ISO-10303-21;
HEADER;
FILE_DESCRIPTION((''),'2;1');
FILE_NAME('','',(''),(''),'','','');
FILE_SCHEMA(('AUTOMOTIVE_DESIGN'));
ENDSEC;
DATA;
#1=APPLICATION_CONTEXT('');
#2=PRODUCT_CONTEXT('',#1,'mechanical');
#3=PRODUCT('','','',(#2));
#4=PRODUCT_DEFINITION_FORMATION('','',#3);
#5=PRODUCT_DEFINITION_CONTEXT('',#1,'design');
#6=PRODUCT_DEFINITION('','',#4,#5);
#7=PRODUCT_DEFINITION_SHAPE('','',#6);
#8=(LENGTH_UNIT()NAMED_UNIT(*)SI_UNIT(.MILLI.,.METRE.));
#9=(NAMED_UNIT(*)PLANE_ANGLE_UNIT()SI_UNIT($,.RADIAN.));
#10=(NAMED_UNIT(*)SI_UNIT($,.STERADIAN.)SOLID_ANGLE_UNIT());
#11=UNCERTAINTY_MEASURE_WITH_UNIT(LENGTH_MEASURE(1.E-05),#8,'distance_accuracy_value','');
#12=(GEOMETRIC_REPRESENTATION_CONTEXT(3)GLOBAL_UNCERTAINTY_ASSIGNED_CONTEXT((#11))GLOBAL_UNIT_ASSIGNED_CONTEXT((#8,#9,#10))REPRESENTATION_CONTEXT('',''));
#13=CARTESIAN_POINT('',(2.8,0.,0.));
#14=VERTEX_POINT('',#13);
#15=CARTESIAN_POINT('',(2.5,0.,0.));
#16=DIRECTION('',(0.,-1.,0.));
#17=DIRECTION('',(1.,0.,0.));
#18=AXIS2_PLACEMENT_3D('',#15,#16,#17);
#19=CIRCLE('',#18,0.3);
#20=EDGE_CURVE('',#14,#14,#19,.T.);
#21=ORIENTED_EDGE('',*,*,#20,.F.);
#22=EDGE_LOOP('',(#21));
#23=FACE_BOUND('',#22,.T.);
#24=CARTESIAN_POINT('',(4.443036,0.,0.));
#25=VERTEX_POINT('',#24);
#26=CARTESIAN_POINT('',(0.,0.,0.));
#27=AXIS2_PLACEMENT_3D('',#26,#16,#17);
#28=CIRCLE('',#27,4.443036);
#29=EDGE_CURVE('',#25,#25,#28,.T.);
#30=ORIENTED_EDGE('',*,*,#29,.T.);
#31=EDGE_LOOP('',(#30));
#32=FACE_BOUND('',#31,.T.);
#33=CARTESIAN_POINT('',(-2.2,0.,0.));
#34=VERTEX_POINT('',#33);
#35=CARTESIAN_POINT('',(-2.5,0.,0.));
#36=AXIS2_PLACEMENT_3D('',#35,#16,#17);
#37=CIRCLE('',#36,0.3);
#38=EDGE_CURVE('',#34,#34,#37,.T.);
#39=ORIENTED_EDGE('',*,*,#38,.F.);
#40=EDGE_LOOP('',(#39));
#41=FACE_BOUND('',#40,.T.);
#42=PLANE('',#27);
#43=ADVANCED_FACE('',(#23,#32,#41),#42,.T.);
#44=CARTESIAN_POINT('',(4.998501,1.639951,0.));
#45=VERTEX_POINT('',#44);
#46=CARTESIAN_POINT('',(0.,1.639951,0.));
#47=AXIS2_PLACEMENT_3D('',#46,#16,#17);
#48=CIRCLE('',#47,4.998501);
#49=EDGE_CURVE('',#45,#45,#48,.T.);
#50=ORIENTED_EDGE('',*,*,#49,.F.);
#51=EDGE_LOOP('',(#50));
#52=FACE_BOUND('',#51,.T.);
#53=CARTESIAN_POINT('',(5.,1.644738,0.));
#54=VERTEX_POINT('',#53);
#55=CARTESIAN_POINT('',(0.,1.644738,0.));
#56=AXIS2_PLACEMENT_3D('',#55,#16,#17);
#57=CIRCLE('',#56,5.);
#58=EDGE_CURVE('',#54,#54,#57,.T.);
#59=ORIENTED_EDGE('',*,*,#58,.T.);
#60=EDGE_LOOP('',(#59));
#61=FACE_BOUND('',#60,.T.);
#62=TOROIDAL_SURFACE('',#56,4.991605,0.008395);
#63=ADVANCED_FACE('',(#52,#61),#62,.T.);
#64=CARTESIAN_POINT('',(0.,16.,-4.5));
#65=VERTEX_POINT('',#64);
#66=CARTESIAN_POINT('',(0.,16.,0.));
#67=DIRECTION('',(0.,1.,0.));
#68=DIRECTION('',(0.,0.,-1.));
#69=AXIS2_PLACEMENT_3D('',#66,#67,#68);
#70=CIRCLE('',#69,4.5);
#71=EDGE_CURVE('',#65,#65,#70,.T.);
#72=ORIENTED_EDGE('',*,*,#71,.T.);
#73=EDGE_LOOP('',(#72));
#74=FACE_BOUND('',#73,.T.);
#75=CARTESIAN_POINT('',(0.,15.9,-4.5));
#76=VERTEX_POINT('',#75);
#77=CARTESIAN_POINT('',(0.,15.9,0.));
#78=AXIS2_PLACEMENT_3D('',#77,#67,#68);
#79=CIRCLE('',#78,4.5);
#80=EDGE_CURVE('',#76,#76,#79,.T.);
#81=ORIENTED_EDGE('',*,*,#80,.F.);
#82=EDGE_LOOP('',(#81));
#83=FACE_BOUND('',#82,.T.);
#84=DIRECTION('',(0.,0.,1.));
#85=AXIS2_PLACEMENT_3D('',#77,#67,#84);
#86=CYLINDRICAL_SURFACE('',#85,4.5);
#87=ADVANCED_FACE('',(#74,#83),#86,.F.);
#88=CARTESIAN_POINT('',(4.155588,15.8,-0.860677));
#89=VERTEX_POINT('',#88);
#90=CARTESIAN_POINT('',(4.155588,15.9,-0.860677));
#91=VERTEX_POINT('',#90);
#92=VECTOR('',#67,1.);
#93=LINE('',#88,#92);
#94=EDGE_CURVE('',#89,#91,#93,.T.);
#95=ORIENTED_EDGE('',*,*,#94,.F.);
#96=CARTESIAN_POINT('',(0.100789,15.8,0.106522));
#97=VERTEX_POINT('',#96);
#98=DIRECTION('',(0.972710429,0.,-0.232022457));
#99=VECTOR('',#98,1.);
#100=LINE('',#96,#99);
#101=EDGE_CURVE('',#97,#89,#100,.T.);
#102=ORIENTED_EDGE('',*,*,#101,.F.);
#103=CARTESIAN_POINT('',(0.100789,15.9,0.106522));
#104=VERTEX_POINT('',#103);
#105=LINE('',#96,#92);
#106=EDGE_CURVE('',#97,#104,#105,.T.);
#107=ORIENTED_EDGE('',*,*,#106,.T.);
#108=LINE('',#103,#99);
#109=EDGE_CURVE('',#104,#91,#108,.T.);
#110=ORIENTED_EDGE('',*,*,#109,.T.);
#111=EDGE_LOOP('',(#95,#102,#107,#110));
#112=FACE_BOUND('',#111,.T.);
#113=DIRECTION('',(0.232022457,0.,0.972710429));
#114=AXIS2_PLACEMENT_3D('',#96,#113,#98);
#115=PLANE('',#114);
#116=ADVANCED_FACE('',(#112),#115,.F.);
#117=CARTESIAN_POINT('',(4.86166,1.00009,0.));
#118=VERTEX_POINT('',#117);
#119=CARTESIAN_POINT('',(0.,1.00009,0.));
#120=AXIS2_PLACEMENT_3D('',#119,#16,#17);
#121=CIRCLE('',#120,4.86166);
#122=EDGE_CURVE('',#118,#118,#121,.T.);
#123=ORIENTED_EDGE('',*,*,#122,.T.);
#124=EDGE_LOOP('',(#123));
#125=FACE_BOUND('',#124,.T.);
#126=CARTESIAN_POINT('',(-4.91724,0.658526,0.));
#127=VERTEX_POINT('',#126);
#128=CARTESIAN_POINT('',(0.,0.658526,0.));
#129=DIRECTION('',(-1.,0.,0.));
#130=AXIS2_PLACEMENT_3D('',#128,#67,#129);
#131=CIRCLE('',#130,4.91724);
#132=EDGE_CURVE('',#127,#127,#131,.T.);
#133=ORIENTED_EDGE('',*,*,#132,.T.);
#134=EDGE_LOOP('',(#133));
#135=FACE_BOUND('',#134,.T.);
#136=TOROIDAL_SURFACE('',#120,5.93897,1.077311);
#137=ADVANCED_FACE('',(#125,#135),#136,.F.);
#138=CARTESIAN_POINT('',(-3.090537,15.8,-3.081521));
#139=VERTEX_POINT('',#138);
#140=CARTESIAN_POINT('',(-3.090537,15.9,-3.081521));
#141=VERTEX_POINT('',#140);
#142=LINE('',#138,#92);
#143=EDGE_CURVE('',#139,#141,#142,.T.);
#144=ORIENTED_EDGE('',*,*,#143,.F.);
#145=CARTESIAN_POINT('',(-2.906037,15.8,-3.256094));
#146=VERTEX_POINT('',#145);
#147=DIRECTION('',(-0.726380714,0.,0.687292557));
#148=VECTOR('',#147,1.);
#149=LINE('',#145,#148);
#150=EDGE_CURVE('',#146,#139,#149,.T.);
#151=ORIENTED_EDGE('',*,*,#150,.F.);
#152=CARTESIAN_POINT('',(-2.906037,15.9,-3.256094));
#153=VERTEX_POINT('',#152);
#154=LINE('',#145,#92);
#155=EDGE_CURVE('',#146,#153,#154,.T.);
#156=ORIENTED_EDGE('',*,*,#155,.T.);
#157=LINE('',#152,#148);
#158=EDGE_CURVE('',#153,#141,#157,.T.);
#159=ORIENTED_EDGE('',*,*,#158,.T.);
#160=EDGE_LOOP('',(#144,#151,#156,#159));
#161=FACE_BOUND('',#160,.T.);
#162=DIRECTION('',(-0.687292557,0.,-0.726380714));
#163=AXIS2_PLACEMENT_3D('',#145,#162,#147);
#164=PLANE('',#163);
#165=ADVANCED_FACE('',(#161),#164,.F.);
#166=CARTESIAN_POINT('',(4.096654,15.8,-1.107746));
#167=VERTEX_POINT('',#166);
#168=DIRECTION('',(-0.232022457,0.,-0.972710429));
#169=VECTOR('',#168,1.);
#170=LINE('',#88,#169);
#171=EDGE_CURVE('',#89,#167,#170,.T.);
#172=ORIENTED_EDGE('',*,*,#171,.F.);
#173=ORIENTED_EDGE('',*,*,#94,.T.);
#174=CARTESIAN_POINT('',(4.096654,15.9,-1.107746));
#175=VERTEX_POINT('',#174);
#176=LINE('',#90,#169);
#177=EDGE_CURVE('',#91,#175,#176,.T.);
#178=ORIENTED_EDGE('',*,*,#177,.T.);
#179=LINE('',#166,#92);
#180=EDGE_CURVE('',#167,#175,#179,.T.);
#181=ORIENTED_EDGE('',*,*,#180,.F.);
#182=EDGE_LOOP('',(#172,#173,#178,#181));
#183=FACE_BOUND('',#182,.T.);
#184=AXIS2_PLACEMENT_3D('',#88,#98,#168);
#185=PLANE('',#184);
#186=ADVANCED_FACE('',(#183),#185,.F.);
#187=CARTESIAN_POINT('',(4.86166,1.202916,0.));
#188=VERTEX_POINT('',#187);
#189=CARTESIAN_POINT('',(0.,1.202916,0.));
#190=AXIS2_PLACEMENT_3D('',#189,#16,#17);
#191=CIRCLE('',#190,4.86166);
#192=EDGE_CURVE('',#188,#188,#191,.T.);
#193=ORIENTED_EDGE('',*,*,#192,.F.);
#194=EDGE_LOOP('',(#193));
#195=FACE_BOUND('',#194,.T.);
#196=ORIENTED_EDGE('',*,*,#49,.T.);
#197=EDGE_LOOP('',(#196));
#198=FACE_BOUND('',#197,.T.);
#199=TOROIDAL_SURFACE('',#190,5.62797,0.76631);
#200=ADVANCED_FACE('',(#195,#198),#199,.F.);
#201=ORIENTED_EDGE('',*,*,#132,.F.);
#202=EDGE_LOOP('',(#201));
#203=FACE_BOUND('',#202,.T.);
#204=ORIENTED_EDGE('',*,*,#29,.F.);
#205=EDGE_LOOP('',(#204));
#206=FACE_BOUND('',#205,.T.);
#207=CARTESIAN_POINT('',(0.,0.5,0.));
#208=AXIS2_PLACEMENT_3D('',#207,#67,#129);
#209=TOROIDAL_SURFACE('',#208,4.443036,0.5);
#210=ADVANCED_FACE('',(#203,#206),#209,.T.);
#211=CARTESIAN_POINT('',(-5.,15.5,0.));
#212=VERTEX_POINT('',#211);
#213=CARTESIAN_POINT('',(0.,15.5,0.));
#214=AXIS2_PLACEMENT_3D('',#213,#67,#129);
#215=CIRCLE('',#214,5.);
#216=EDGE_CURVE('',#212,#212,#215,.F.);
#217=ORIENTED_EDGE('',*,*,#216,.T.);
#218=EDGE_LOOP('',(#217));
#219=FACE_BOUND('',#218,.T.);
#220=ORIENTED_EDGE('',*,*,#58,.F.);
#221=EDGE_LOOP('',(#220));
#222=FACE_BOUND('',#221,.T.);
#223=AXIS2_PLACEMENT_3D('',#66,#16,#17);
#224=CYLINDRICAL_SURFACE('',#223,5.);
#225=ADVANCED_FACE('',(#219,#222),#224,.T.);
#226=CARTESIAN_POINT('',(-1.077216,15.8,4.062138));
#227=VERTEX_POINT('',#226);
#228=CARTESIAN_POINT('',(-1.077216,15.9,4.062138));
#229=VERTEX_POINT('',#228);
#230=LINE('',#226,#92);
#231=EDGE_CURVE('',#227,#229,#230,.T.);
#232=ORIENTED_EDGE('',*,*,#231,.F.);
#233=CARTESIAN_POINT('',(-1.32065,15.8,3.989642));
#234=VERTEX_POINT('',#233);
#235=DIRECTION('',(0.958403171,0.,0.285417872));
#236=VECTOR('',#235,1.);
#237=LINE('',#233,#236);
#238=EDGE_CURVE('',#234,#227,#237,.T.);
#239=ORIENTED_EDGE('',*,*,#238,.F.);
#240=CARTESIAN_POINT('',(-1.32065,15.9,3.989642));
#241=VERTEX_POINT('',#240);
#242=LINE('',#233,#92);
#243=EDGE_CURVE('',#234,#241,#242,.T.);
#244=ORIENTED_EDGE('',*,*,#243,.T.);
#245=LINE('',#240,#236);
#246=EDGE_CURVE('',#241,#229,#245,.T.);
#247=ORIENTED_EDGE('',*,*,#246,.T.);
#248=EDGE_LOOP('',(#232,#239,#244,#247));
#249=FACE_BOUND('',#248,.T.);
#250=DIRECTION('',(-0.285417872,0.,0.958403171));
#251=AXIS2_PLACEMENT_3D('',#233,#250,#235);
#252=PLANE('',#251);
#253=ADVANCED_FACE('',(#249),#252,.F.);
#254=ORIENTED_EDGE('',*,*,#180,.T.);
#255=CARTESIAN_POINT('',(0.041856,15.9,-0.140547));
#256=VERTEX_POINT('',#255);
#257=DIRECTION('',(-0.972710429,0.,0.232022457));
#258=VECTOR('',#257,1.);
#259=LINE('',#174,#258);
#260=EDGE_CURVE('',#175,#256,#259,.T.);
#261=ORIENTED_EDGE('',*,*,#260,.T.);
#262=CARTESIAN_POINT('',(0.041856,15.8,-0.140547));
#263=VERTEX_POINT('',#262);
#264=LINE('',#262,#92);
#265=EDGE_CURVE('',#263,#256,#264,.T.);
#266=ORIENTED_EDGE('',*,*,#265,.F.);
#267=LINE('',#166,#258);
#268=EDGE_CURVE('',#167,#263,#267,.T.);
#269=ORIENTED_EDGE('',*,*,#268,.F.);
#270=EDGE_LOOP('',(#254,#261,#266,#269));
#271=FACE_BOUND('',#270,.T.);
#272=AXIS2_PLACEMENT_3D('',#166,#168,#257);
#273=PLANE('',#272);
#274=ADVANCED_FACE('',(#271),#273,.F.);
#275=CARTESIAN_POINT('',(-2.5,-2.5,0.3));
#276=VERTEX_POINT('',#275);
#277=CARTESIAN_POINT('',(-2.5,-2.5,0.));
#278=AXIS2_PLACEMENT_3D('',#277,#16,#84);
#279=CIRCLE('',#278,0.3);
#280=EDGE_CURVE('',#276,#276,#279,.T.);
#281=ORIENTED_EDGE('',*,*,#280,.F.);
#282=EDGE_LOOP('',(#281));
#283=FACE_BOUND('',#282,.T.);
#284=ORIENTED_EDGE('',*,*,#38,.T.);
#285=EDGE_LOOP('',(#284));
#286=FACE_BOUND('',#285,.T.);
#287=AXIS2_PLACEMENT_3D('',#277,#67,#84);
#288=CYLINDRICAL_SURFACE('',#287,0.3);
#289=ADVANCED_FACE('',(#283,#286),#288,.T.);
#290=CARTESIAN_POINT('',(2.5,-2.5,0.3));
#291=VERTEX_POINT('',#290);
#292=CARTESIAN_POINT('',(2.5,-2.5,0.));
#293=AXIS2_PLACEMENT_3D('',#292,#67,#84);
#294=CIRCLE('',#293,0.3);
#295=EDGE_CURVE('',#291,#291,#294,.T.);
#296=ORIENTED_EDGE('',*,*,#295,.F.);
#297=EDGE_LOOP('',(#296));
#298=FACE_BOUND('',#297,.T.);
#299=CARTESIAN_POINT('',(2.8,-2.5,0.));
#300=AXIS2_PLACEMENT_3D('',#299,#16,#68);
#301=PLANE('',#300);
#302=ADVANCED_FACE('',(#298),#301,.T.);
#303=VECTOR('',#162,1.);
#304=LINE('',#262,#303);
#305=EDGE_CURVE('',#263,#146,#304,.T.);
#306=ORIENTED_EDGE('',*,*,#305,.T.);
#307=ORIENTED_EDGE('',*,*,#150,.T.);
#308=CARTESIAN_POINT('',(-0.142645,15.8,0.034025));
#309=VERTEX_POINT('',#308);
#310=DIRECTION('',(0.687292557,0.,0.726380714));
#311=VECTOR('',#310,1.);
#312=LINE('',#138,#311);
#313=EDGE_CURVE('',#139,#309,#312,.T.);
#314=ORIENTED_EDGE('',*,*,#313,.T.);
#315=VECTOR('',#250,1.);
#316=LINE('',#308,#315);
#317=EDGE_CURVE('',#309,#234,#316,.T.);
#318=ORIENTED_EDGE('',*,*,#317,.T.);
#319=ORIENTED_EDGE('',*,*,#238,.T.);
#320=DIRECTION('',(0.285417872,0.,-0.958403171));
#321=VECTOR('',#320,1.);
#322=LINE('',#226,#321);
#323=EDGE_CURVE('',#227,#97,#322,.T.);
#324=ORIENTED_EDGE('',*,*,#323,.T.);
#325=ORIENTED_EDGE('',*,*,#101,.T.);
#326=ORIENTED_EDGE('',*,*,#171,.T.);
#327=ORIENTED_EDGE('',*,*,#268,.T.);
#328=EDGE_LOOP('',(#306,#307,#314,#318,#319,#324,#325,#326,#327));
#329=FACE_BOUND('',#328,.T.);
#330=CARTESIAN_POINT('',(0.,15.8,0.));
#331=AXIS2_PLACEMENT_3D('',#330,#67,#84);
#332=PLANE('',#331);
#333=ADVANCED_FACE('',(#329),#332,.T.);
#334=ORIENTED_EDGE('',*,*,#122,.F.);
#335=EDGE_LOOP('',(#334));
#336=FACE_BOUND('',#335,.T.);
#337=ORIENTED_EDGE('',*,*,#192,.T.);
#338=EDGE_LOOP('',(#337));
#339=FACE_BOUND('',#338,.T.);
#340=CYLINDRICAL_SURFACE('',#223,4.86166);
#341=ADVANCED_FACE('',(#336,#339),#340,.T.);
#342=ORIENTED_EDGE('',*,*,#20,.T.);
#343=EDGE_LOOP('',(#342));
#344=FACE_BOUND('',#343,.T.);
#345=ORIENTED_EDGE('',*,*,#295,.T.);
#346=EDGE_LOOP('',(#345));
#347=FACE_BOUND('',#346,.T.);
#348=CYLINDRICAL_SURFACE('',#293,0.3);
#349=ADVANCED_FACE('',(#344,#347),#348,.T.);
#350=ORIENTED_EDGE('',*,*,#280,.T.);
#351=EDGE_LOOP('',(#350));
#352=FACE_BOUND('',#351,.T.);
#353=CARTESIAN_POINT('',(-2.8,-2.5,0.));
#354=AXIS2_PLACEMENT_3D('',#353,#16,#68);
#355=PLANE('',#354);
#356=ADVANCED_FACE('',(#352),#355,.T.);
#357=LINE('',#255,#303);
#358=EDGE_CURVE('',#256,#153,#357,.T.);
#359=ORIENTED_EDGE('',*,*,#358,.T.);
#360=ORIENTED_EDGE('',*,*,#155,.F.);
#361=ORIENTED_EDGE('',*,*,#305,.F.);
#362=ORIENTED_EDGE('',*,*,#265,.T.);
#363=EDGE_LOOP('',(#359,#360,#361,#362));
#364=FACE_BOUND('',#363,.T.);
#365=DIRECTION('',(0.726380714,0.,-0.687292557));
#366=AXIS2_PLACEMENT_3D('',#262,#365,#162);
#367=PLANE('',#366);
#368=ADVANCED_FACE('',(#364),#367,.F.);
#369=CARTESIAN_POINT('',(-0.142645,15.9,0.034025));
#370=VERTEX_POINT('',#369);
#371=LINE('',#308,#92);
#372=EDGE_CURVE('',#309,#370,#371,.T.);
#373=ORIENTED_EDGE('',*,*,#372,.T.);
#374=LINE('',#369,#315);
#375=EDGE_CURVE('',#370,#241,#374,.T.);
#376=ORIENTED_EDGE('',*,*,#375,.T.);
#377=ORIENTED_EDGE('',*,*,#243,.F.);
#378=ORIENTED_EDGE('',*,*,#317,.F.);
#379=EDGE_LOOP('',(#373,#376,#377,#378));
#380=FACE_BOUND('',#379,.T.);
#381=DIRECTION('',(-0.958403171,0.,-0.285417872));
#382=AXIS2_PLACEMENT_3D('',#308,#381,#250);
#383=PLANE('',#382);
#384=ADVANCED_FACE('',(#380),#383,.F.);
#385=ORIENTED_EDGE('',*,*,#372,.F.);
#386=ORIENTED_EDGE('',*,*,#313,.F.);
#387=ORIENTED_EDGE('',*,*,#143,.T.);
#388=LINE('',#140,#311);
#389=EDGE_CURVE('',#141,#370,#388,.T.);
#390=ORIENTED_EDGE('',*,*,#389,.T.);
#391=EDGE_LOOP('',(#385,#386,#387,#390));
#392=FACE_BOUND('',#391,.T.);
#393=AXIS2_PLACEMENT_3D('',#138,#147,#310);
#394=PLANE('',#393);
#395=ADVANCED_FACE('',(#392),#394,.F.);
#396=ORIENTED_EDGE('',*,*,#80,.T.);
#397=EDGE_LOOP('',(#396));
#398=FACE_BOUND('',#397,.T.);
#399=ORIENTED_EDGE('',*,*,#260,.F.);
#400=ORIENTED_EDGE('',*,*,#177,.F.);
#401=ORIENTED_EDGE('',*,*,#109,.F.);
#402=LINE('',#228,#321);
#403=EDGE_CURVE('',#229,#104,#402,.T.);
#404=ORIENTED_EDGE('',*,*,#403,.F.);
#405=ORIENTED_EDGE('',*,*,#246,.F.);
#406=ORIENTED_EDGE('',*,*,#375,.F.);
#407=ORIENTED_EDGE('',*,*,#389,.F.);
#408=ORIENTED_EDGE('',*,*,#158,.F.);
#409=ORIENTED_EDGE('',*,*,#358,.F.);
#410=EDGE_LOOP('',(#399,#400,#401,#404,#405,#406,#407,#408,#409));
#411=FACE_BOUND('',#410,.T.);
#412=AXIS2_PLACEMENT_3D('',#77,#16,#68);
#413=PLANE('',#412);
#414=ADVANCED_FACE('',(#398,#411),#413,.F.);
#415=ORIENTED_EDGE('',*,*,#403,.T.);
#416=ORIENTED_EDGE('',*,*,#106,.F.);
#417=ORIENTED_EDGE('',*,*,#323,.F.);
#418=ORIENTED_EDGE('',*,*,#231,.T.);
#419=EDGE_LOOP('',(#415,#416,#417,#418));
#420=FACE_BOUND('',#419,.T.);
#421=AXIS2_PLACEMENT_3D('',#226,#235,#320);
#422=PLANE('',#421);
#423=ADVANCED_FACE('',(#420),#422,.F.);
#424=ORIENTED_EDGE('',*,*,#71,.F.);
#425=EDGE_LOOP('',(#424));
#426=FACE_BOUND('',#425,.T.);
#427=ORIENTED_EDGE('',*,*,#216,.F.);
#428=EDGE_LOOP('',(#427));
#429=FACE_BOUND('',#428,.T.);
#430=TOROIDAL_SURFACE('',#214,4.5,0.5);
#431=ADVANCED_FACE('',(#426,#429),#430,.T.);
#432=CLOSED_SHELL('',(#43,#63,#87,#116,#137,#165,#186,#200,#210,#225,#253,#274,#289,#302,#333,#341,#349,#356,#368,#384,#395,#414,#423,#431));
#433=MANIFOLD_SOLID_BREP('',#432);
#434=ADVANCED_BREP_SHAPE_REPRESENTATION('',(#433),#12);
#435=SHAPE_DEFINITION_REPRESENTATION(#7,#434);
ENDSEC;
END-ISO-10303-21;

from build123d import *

# Parameters (mm, degrees)
SKETCH2_R          = 4.5
CUT_EXTRUDE1_DEPTH = 0.1
CUT_EXTRUDE2_DEPTH = 0.1
SKETCH4_W          = 0.3
SKETCH4_H          = 2.5
FILLET1_R          = 0.5


with BuildPart() as part:
    # Sketch1 → Revolve1 (revolve)
    with BuildSketch(Plane.XY):
        with BuildLine():
            Line((5, 16), (0, 16))
            Line((0, 16), (0, 0))
            Line((0, 0), (4.827244523, 0))
            ThreePointArc((4.827244523, 0), (4.990681342, 0.249416346), (4.961933008, 0.546222076))
            ThreePointArc((4.961933008, 0.546222076), (4.887026856, 0.767683511), (4.861659937, 1.00008966))
            Line((4.861659937, 1.00008966), (4.861659937, 1.202915685))
            ThreePointArc((4.861659937, 1.202915685), (4.896669937, 1.431894531), (4.99850097, 1.639950899))
            ThreePointArc((4.99850097, 1.639950899), (4.999616482, 1.64223006), (5, 1.644738417))
            Line((5, 1.644738417), (5, 16))
        make_face()
    revolve(axis=Axis((0, 16, 0), (0, -1, 0)))

    # Sketch2 → Cut-Extrude1 (cut)
    with BuildSketch(Plane(origin=(0, 16, 0), x_dir=(-1, 0, 0), z_dir=(0, 1, 0))):
        with Locations(Location((0, 0, 0), (0, 0, 270))):
            Circle(SKETCH2_R)
    extrude(amount=-CUT_EXTRUDE1_DEPTH, mode=Mode.SUBTRACT)

    # Sketch3 → Cut-Extrude2 (cut)
    with BuildSketch(Plane(origin=(0, 15.9, 0), x_dir=(-1, 0, 0), z_dir=(0, 1, 0))):
        Polygon((2.906036622, -3.256093686), (3.090537324, -3.081521376), (0.142645036, 0.03402539), (1.320649975, 3.989641976), (1.07721557, 4.062138116), (-0.10078937, 0.10652153), (-4.155587963, -0.860677244), (-4.096654259, -1.107745693), (-0.041855666, -0.14054692), align=None)
    extrude(amount=-CUT_EXTRUDE2_DEPTH, mode=Mode.SUBTRACT)

    # Sketch4 → Revolve2 (revolve)
    with BuildSketch(Plane(origin=(0, 0, 0), x_dir=(-1, 0, 0), z_dir=(0, 0, -1)), mode=Mode.PRIVATE) as revolve2_sk:
        with Locations((-2.65, -1.25)):
            Rectangle(SKETCH4_W, SKETCH4_H)
    revolve2 = revolve(revolve2_sk.sketch.rotate(Axis((2.5, -2.5, 0), (0, 1, 0)), 270), axis=Axis((2.5, -2.5, 0), (0, 1, 0)))

    # Fillet1
    fillet1_edges = [part.edges().sort_by_distance(p)[0] for p in [
        (-5, 16, 0),
        (-4.827244523, 0, 0),
    ]]
    fillet(fillet1_edges, radius=FILLET1_R - 0.0001)  # a hair under: the kernel refuses the full size

    # Simetría3: Revolve2 across plane
    add(revolve2.mirror(Plane(origin=(0, 0, 0), x_dir=(0, 0, 1), z_dir=(1, 0, 0))))


solid = part.part
